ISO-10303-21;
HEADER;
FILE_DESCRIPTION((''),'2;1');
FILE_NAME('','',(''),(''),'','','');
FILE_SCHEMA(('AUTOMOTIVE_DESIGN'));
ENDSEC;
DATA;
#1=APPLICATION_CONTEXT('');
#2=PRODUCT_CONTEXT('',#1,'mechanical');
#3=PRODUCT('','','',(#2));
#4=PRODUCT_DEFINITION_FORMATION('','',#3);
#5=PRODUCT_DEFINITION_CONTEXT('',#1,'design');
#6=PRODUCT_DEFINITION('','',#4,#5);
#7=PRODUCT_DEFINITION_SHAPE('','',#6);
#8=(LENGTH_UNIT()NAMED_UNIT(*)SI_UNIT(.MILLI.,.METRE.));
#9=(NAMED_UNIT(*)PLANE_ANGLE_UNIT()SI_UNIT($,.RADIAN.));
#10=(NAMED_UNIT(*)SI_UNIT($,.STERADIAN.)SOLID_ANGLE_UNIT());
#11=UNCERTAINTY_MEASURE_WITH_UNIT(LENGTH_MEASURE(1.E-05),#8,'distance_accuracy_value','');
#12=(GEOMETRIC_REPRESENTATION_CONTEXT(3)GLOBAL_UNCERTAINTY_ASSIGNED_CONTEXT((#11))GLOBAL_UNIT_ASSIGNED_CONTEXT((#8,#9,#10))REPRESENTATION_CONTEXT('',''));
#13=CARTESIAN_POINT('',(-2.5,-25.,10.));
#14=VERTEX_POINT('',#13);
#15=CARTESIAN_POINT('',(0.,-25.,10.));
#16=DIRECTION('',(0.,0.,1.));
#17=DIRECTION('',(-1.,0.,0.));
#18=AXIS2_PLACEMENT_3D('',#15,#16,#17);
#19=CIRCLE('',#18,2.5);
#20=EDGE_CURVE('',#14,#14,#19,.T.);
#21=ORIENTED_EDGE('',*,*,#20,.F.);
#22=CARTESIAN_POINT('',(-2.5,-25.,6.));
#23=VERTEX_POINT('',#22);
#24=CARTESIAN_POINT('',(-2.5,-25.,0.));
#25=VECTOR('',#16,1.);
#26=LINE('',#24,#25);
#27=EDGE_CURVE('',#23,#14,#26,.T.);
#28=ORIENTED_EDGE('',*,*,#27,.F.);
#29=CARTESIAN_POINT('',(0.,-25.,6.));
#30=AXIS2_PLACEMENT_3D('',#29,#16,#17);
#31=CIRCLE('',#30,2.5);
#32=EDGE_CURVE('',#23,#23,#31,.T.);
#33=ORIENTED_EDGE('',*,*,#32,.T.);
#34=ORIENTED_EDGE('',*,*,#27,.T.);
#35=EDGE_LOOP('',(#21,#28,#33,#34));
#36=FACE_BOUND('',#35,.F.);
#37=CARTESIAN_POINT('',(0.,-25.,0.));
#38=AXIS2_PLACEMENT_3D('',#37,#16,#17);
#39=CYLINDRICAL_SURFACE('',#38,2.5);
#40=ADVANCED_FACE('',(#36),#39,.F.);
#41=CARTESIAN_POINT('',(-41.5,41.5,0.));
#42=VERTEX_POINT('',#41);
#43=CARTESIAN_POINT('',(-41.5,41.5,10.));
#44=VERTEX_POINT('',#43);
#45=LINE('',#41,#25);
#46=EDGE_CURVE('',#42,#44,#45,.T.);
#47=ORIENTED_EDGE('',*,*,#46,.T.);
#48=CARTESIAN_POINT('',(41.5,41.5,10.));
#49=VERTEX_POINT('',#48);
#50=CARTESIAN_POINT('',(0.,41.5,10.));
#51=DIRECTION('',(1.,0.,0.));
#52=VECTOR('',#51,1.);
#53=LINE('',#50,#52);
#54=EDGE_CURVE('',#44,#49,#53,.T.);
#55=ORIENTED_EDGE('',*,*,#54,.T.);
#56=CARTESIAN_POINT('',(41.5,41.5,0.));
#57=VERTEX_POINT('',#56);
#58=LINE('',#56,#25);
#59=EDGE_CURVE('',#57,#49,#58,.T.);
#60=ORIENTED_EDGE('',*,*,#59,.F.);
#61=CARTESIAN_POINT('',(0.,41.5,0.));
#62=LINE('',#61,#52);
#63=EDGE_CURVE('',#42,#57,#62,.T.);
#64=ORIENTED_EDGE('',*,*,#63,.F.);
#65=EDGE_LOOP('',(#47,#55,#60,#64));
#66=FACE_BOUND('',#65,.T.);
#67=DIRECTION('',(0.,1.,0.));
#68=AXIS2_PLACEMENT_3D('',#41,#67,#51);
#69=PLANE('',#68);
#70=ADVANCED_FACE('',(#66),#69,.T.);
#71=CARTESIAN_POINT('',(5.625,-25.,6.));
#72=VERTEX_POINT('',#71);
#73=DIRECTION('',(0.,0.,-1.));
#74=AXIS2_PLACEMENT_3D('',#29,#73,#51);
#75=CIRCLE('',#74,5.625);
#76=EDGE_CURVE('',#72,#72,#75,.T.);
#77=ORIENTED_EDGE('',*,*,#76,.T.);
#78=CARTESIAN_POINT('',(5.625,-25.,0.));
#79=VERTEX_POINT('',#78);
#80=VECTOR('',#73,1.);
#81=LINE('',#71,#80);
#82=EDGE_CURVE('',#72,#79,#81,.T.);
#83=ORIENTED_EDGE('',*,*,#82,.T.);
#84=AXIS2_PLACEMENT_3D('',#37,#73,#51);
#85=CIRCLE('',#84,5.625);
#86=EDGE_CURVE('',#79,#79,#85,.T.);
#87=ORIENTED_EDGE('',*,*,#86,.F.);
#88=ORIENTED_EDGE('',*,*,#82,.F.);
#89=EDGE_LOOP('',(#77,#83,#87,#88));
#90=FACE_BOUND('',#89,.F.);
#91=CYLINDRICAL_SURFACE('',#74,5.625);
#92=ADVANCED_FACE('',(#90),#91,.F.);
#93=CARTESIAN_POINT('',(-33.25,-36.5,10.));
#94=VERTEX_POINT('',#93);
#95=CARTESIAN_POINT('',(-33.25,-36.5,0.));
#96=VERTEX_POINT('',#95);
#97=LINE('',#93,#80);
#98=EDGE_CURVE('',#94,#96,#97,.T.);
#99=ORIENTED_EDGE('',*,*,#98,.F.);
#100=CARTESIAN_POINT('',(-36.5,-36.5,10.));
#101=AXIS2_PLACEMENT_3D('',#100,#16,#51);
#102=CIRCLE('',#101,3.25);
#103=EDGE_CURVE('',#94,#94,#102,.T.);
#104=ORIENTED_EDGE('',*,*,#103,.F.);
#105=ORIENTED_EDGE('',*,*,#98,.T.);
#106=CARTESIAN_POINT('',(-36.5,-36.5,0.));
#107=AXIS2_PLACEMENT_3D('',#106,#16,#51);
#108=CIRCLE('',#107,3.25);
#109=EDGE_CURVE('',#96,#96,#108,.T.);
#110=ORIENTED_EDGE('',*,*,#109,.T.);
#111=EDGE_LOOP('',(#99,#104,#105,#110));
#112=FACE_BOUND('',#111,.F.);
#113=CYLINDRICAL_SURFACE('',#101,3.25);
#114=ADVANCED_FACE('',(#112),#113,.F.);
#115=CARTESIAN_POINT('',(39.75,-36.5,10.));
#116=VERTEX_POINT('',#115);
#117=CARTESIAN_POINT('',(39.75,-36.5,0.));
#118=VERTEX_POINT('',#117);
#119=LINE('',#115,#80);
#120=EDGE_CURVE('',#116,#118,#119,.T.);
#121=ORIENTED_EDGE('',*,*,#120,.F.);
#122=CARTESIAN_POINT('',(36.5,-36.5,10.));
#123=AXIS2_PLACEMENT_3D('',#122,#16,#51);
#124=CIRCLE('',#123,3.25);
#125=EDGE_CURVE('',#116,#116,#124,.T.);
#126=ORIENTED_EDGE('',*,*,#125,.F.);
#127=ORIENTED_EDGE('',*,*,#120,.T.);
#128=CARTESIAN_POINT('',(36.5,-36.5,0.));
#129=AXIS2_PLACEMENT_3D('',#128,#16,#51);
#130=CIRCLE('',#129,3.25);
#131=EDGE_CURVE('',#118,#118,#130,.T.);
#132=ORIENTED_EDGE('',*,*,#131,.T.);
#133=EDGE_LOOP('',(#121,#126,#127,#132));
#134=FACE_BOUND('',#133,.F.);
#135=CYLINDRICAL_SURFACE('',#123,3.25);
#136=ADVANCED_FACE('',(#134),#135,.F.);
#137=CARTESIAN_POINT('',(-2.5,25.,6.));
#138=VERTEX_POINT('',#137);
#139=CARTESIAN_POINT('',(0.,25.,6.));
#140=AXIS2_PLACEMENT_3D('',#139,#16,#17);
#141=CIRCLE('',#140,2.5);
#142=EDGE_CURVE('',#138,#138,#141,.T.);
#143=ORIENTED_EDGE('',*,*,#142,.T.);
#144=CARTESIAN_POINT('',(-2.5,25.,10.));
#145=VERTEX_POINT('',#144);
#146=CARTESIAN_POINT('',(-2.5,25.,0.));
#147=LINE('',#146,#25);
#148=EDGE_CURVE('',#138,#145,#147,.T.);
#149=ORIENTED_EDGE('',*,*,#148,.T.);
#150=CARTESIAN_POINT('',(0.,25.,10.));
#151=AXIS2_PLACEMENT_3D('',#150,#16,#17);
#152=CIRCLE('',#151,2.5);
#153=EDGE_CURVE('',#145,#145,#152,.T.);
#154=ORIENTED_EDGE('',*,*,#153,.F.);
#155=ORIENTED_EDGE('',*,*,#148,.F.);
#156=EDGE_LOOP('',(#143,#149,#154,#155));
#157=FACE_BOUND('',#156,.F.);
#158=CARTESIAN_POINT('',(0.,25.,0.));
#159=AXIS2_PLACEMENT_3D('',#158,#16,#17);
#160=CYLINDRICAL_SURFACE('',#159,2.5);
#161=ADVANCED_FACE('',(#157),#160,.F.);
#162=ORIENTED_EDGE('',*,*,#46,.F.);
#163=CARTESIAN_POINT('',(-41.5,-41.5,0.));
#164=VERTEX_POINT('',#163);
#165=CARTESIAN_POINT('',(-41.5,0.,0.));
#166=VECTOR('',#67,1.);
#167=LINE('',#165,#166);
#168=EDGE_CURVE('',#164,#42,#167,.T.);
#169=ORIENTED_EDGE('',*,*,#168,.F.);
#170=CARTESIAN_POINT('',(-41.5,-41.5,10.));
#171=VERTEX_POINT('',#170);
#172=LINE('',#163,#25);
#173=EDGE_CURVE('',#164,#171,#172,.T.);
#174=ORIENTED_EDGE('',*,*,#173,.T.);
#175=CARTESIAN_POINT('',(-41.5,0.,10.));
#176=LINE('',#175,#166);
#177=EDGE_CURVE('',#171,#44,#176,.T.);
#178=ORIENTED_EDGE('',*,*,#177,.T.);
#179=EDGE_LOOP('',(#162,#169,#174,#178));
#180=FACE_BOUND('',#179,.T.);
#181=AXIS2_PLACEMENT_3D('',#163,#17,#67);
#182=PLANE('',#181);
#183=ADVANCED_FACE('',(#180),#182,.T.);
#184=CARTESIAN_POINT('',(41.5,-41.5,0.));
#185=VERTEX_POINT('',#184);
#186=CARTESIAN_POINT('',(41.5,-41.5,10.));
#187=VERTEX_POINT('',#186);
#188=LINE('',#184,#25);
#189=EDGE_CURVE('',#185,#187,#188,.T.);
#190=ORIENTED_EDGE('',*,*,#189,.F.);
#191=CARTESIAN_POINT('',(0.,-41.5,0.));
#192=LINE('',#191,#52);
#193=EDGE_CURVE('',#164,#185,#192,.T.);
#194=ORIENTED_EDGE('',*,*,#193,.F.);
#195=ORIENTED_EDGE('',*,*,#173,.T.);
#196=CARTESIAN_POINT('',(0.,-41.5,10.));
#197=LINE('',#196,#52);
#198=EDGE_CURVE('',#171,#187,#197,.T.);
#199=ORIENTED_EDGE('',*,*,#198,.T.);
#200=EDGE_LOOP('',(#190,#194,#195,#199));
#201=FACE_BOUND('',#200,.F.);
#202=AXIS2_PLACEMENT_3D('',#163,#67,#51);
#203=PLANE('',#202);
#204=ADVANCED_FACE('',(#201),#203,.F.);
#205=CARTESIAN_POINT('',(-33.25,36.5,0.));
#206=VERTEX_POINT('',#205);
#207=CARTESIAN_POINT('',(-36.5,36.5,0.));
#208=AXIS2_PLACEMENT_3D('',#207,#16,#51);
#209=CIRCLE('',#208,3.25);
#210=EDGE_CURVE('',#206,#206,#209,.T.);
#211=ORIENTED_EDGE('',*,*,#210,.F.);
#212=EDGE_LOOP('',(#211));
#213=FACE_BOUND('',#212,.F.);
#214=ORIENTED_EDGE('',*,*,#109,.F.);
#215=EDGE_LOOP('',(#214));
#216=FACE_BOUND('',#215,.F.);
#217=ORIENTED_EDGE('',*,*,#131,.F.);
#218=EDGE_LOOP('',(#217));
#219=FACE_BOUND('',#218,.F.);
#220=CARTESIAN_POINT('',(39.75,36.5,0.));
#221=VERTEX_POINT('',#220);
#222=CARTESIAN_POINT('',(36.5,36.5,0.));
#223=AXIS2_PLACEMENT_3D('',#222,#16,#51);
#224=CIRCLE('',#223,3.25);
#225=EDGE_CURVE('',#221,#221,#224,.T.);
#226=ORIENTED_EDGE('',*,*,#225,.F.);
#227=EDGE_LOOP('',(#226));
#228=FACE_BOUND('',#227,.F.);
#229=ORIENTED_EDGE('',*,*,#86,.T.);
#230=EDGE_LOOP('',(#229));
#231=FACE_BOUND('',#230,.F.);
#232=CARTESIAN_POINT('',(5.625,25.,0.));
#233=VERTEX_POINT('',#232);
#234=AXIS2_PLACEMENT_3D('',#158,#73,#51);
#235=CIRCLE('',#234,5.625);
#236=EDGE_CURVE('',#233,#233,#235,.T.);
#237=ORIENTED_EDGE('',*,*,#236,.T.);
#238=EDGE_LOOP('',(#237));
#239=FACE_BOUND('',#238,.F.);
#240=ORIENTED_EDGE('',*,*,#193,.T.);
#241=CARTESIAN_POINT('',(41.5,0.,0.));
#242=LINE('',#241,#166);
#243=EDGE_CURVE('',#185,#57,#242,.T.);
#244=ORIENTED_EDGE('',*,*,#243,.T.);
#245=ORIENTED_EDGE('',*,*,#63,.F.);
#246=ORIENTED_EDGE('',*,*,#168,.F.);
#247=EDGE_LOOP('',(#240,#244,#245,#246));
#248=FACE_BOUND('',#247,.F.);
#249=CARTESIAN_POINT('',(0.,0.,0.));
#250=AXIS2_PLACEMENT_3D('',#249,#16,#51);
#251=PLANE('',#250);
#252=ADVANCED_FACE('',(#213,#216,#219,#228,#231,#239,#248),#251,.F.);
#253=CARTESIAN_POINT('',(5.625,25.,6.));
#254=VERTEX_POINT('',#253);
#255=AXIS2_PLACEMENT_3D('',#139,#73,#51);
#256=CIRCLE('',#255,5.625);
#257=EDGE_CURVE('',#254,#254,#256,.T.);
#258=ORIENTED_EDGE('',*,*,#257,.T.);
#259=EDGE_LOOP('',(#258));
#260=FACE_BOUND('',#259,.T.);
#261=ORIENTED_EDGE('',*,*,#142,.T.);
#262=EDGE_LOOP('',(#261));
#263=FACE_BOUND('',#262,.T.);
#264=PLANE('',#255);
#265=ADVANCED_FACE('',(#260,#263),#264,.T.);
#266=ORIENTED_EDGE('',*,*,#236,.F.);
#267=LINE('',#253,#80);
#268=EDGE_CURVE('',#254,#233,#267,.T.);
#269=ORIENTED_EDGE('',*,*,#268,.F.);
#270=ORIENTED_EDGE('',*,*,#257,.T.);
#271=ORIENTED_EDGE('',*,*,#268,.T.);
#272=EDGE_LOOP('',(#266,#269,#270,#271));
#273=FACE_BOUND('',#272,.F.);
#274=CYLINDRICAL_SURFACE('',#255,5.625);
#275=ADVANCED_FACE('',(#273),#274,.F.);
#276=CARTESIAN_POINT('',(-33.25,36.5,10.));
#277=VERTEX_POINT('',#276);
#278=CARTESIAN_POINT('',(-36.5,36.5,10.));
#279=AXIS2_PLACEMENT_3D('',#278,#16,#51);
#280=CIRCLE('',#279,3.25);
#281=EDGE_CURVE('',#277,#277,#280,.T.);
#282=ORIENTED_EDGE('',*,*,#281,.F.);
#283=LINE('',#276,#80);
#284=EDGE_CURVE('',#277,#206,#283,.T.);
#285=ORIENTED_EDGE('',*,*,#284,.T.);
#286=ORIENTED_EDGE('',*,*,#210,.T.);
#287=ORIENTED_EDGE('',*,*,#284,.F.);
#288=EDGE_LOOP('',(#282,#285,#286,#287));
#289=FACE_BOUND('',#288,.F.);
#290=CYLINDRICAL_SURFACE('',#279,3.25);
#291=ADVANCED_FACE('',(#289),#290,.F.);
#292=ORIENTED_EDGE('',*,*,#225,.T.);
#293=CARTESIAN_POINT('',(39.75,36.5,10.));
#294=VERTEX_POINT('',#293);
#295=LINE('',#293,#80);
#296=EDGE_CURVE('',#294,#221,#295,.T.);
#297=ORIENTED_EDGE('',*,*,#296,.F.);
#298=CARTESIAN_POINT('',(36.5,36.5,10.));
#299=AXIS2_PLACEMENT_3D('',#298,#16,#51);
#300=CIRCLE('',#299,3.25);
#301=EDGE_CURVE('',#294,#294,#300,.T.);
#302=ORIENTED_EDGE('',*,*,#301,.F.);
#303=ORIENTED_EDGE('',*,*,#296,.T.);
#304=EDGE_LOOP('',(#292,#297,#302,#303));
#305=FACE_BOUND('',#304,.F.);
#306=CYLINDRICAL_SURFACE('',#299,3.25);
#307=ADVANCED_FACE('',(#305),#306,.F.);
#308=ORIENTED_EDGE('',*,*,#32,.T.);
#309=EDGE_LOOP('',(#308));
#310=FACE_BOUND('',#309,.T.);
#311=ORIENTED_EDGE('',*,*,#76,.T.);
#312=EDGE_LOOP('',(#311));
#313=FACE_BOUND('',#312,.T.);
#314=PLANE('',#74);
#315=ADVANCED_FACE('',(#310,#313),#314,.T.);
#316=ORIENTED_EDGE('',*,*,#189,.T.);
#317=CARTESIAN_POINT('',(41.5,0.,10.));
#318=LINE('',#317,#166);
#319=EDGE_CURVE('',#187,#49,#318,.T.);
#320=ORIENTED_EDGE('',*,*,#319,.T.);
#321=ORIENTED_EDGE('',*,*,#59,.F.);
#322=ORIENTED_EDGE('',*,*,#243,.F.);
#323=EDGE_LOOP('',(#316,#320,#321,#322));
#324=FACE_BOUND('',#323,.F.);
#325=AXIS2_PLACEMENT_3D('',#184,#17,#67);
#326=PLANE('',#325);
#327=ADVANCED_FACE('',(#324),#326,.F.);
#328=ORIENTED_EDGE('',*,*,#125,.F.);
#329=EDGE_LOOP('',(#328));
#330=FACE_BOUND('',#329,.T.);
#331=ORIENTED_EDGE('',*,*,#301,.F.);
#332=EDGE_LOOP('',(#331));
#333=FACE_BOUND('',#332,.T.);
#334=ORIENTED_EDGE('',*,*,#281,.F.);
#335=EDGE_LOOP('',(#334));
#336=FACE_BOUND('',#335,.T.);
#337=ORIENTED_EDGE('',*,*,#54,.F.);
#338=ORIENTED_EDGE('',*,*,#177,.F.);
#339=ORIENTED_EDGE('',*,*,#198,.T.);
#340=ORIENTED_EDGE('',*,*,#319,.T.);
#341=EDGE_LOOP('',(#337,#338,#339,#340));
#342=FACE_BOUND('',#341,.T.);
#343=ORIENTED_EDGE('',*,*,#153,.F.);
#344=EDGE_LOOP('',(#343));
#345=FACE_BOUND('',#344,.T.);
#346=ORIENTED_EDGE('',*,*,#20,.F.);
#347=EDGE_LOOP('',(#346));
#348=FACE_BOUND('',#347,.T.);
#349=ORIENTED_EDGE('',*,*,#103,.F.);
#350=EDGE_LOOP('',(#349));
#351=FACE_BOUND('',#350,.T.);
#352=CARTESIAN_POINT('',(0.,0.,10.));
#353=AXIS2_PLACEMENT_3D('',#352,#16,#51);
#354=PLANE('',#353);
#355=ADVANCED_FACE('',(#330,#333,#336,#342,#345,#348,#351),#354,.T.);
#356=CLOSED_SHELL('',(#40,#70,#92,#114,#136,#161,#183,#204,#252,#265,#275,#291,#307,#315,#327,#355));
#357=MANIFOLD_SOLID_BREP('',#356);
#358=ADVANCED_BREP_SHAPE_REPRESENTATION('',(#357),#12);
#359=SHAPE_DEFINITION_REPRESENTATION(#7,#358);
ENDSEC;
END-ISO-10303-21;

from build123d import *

# Parameters (mm, degrees)
F0_W           = 83
F0_H           = 83
F1_DEPTH       = 10
F2_R           = 3.25
F3_DEPTH       = 10
F5_D           = 5
F5_DEPTH       = 15
F5_CBORE_D     = 11.25
F5_CBORE_DEPTH = 6
F5_TIP         = 1.5021515476


with BuildPart() as f1:
    # F0 (on Top) → F1 (new body)
    with BuildSketch(Plane.XY):
        Rectangle(F0_W, F0_H)
    extrude(amount=F1_DEPTH)

    # F2 (on face) → F3 (cut, through all)
    with BuildSketch(Plane.XY.offset(10)):
        with Locations((-36.5, 36.5)):
            Circle(F2_R)
        with Locations((-36.5, -36.5)):
            Circle(F2_R)
        with Locations((36.5, -36.5)):
            Circle(F2_R)
        with Locations((36.5, 36.5)):
            Circle(F2_R)
    extrude(amount=-F3_DEPTH, mode=Mode.SUBTRACT)

    # F5
    with Locations(Plane(origin=(0, 0, 0), x_dir=(1, 0, 0), z_dir=(0, 0, -1))):
        with Locations((0, -25), (0, 25)):
            CounterBoreHole(F5_D / 2, F5_CBORE_D / 2, F5_CBORE_DEPTH, depth=F5_DEPTH)
            with Locations((0, 0, -(F5_DEPTH + F5_TIP / 2))):  # 118° drill point
                Cone(0, F5_D / 2, F5_TIP, mode=Mode.SUBTRACT)


solid = f1.part
